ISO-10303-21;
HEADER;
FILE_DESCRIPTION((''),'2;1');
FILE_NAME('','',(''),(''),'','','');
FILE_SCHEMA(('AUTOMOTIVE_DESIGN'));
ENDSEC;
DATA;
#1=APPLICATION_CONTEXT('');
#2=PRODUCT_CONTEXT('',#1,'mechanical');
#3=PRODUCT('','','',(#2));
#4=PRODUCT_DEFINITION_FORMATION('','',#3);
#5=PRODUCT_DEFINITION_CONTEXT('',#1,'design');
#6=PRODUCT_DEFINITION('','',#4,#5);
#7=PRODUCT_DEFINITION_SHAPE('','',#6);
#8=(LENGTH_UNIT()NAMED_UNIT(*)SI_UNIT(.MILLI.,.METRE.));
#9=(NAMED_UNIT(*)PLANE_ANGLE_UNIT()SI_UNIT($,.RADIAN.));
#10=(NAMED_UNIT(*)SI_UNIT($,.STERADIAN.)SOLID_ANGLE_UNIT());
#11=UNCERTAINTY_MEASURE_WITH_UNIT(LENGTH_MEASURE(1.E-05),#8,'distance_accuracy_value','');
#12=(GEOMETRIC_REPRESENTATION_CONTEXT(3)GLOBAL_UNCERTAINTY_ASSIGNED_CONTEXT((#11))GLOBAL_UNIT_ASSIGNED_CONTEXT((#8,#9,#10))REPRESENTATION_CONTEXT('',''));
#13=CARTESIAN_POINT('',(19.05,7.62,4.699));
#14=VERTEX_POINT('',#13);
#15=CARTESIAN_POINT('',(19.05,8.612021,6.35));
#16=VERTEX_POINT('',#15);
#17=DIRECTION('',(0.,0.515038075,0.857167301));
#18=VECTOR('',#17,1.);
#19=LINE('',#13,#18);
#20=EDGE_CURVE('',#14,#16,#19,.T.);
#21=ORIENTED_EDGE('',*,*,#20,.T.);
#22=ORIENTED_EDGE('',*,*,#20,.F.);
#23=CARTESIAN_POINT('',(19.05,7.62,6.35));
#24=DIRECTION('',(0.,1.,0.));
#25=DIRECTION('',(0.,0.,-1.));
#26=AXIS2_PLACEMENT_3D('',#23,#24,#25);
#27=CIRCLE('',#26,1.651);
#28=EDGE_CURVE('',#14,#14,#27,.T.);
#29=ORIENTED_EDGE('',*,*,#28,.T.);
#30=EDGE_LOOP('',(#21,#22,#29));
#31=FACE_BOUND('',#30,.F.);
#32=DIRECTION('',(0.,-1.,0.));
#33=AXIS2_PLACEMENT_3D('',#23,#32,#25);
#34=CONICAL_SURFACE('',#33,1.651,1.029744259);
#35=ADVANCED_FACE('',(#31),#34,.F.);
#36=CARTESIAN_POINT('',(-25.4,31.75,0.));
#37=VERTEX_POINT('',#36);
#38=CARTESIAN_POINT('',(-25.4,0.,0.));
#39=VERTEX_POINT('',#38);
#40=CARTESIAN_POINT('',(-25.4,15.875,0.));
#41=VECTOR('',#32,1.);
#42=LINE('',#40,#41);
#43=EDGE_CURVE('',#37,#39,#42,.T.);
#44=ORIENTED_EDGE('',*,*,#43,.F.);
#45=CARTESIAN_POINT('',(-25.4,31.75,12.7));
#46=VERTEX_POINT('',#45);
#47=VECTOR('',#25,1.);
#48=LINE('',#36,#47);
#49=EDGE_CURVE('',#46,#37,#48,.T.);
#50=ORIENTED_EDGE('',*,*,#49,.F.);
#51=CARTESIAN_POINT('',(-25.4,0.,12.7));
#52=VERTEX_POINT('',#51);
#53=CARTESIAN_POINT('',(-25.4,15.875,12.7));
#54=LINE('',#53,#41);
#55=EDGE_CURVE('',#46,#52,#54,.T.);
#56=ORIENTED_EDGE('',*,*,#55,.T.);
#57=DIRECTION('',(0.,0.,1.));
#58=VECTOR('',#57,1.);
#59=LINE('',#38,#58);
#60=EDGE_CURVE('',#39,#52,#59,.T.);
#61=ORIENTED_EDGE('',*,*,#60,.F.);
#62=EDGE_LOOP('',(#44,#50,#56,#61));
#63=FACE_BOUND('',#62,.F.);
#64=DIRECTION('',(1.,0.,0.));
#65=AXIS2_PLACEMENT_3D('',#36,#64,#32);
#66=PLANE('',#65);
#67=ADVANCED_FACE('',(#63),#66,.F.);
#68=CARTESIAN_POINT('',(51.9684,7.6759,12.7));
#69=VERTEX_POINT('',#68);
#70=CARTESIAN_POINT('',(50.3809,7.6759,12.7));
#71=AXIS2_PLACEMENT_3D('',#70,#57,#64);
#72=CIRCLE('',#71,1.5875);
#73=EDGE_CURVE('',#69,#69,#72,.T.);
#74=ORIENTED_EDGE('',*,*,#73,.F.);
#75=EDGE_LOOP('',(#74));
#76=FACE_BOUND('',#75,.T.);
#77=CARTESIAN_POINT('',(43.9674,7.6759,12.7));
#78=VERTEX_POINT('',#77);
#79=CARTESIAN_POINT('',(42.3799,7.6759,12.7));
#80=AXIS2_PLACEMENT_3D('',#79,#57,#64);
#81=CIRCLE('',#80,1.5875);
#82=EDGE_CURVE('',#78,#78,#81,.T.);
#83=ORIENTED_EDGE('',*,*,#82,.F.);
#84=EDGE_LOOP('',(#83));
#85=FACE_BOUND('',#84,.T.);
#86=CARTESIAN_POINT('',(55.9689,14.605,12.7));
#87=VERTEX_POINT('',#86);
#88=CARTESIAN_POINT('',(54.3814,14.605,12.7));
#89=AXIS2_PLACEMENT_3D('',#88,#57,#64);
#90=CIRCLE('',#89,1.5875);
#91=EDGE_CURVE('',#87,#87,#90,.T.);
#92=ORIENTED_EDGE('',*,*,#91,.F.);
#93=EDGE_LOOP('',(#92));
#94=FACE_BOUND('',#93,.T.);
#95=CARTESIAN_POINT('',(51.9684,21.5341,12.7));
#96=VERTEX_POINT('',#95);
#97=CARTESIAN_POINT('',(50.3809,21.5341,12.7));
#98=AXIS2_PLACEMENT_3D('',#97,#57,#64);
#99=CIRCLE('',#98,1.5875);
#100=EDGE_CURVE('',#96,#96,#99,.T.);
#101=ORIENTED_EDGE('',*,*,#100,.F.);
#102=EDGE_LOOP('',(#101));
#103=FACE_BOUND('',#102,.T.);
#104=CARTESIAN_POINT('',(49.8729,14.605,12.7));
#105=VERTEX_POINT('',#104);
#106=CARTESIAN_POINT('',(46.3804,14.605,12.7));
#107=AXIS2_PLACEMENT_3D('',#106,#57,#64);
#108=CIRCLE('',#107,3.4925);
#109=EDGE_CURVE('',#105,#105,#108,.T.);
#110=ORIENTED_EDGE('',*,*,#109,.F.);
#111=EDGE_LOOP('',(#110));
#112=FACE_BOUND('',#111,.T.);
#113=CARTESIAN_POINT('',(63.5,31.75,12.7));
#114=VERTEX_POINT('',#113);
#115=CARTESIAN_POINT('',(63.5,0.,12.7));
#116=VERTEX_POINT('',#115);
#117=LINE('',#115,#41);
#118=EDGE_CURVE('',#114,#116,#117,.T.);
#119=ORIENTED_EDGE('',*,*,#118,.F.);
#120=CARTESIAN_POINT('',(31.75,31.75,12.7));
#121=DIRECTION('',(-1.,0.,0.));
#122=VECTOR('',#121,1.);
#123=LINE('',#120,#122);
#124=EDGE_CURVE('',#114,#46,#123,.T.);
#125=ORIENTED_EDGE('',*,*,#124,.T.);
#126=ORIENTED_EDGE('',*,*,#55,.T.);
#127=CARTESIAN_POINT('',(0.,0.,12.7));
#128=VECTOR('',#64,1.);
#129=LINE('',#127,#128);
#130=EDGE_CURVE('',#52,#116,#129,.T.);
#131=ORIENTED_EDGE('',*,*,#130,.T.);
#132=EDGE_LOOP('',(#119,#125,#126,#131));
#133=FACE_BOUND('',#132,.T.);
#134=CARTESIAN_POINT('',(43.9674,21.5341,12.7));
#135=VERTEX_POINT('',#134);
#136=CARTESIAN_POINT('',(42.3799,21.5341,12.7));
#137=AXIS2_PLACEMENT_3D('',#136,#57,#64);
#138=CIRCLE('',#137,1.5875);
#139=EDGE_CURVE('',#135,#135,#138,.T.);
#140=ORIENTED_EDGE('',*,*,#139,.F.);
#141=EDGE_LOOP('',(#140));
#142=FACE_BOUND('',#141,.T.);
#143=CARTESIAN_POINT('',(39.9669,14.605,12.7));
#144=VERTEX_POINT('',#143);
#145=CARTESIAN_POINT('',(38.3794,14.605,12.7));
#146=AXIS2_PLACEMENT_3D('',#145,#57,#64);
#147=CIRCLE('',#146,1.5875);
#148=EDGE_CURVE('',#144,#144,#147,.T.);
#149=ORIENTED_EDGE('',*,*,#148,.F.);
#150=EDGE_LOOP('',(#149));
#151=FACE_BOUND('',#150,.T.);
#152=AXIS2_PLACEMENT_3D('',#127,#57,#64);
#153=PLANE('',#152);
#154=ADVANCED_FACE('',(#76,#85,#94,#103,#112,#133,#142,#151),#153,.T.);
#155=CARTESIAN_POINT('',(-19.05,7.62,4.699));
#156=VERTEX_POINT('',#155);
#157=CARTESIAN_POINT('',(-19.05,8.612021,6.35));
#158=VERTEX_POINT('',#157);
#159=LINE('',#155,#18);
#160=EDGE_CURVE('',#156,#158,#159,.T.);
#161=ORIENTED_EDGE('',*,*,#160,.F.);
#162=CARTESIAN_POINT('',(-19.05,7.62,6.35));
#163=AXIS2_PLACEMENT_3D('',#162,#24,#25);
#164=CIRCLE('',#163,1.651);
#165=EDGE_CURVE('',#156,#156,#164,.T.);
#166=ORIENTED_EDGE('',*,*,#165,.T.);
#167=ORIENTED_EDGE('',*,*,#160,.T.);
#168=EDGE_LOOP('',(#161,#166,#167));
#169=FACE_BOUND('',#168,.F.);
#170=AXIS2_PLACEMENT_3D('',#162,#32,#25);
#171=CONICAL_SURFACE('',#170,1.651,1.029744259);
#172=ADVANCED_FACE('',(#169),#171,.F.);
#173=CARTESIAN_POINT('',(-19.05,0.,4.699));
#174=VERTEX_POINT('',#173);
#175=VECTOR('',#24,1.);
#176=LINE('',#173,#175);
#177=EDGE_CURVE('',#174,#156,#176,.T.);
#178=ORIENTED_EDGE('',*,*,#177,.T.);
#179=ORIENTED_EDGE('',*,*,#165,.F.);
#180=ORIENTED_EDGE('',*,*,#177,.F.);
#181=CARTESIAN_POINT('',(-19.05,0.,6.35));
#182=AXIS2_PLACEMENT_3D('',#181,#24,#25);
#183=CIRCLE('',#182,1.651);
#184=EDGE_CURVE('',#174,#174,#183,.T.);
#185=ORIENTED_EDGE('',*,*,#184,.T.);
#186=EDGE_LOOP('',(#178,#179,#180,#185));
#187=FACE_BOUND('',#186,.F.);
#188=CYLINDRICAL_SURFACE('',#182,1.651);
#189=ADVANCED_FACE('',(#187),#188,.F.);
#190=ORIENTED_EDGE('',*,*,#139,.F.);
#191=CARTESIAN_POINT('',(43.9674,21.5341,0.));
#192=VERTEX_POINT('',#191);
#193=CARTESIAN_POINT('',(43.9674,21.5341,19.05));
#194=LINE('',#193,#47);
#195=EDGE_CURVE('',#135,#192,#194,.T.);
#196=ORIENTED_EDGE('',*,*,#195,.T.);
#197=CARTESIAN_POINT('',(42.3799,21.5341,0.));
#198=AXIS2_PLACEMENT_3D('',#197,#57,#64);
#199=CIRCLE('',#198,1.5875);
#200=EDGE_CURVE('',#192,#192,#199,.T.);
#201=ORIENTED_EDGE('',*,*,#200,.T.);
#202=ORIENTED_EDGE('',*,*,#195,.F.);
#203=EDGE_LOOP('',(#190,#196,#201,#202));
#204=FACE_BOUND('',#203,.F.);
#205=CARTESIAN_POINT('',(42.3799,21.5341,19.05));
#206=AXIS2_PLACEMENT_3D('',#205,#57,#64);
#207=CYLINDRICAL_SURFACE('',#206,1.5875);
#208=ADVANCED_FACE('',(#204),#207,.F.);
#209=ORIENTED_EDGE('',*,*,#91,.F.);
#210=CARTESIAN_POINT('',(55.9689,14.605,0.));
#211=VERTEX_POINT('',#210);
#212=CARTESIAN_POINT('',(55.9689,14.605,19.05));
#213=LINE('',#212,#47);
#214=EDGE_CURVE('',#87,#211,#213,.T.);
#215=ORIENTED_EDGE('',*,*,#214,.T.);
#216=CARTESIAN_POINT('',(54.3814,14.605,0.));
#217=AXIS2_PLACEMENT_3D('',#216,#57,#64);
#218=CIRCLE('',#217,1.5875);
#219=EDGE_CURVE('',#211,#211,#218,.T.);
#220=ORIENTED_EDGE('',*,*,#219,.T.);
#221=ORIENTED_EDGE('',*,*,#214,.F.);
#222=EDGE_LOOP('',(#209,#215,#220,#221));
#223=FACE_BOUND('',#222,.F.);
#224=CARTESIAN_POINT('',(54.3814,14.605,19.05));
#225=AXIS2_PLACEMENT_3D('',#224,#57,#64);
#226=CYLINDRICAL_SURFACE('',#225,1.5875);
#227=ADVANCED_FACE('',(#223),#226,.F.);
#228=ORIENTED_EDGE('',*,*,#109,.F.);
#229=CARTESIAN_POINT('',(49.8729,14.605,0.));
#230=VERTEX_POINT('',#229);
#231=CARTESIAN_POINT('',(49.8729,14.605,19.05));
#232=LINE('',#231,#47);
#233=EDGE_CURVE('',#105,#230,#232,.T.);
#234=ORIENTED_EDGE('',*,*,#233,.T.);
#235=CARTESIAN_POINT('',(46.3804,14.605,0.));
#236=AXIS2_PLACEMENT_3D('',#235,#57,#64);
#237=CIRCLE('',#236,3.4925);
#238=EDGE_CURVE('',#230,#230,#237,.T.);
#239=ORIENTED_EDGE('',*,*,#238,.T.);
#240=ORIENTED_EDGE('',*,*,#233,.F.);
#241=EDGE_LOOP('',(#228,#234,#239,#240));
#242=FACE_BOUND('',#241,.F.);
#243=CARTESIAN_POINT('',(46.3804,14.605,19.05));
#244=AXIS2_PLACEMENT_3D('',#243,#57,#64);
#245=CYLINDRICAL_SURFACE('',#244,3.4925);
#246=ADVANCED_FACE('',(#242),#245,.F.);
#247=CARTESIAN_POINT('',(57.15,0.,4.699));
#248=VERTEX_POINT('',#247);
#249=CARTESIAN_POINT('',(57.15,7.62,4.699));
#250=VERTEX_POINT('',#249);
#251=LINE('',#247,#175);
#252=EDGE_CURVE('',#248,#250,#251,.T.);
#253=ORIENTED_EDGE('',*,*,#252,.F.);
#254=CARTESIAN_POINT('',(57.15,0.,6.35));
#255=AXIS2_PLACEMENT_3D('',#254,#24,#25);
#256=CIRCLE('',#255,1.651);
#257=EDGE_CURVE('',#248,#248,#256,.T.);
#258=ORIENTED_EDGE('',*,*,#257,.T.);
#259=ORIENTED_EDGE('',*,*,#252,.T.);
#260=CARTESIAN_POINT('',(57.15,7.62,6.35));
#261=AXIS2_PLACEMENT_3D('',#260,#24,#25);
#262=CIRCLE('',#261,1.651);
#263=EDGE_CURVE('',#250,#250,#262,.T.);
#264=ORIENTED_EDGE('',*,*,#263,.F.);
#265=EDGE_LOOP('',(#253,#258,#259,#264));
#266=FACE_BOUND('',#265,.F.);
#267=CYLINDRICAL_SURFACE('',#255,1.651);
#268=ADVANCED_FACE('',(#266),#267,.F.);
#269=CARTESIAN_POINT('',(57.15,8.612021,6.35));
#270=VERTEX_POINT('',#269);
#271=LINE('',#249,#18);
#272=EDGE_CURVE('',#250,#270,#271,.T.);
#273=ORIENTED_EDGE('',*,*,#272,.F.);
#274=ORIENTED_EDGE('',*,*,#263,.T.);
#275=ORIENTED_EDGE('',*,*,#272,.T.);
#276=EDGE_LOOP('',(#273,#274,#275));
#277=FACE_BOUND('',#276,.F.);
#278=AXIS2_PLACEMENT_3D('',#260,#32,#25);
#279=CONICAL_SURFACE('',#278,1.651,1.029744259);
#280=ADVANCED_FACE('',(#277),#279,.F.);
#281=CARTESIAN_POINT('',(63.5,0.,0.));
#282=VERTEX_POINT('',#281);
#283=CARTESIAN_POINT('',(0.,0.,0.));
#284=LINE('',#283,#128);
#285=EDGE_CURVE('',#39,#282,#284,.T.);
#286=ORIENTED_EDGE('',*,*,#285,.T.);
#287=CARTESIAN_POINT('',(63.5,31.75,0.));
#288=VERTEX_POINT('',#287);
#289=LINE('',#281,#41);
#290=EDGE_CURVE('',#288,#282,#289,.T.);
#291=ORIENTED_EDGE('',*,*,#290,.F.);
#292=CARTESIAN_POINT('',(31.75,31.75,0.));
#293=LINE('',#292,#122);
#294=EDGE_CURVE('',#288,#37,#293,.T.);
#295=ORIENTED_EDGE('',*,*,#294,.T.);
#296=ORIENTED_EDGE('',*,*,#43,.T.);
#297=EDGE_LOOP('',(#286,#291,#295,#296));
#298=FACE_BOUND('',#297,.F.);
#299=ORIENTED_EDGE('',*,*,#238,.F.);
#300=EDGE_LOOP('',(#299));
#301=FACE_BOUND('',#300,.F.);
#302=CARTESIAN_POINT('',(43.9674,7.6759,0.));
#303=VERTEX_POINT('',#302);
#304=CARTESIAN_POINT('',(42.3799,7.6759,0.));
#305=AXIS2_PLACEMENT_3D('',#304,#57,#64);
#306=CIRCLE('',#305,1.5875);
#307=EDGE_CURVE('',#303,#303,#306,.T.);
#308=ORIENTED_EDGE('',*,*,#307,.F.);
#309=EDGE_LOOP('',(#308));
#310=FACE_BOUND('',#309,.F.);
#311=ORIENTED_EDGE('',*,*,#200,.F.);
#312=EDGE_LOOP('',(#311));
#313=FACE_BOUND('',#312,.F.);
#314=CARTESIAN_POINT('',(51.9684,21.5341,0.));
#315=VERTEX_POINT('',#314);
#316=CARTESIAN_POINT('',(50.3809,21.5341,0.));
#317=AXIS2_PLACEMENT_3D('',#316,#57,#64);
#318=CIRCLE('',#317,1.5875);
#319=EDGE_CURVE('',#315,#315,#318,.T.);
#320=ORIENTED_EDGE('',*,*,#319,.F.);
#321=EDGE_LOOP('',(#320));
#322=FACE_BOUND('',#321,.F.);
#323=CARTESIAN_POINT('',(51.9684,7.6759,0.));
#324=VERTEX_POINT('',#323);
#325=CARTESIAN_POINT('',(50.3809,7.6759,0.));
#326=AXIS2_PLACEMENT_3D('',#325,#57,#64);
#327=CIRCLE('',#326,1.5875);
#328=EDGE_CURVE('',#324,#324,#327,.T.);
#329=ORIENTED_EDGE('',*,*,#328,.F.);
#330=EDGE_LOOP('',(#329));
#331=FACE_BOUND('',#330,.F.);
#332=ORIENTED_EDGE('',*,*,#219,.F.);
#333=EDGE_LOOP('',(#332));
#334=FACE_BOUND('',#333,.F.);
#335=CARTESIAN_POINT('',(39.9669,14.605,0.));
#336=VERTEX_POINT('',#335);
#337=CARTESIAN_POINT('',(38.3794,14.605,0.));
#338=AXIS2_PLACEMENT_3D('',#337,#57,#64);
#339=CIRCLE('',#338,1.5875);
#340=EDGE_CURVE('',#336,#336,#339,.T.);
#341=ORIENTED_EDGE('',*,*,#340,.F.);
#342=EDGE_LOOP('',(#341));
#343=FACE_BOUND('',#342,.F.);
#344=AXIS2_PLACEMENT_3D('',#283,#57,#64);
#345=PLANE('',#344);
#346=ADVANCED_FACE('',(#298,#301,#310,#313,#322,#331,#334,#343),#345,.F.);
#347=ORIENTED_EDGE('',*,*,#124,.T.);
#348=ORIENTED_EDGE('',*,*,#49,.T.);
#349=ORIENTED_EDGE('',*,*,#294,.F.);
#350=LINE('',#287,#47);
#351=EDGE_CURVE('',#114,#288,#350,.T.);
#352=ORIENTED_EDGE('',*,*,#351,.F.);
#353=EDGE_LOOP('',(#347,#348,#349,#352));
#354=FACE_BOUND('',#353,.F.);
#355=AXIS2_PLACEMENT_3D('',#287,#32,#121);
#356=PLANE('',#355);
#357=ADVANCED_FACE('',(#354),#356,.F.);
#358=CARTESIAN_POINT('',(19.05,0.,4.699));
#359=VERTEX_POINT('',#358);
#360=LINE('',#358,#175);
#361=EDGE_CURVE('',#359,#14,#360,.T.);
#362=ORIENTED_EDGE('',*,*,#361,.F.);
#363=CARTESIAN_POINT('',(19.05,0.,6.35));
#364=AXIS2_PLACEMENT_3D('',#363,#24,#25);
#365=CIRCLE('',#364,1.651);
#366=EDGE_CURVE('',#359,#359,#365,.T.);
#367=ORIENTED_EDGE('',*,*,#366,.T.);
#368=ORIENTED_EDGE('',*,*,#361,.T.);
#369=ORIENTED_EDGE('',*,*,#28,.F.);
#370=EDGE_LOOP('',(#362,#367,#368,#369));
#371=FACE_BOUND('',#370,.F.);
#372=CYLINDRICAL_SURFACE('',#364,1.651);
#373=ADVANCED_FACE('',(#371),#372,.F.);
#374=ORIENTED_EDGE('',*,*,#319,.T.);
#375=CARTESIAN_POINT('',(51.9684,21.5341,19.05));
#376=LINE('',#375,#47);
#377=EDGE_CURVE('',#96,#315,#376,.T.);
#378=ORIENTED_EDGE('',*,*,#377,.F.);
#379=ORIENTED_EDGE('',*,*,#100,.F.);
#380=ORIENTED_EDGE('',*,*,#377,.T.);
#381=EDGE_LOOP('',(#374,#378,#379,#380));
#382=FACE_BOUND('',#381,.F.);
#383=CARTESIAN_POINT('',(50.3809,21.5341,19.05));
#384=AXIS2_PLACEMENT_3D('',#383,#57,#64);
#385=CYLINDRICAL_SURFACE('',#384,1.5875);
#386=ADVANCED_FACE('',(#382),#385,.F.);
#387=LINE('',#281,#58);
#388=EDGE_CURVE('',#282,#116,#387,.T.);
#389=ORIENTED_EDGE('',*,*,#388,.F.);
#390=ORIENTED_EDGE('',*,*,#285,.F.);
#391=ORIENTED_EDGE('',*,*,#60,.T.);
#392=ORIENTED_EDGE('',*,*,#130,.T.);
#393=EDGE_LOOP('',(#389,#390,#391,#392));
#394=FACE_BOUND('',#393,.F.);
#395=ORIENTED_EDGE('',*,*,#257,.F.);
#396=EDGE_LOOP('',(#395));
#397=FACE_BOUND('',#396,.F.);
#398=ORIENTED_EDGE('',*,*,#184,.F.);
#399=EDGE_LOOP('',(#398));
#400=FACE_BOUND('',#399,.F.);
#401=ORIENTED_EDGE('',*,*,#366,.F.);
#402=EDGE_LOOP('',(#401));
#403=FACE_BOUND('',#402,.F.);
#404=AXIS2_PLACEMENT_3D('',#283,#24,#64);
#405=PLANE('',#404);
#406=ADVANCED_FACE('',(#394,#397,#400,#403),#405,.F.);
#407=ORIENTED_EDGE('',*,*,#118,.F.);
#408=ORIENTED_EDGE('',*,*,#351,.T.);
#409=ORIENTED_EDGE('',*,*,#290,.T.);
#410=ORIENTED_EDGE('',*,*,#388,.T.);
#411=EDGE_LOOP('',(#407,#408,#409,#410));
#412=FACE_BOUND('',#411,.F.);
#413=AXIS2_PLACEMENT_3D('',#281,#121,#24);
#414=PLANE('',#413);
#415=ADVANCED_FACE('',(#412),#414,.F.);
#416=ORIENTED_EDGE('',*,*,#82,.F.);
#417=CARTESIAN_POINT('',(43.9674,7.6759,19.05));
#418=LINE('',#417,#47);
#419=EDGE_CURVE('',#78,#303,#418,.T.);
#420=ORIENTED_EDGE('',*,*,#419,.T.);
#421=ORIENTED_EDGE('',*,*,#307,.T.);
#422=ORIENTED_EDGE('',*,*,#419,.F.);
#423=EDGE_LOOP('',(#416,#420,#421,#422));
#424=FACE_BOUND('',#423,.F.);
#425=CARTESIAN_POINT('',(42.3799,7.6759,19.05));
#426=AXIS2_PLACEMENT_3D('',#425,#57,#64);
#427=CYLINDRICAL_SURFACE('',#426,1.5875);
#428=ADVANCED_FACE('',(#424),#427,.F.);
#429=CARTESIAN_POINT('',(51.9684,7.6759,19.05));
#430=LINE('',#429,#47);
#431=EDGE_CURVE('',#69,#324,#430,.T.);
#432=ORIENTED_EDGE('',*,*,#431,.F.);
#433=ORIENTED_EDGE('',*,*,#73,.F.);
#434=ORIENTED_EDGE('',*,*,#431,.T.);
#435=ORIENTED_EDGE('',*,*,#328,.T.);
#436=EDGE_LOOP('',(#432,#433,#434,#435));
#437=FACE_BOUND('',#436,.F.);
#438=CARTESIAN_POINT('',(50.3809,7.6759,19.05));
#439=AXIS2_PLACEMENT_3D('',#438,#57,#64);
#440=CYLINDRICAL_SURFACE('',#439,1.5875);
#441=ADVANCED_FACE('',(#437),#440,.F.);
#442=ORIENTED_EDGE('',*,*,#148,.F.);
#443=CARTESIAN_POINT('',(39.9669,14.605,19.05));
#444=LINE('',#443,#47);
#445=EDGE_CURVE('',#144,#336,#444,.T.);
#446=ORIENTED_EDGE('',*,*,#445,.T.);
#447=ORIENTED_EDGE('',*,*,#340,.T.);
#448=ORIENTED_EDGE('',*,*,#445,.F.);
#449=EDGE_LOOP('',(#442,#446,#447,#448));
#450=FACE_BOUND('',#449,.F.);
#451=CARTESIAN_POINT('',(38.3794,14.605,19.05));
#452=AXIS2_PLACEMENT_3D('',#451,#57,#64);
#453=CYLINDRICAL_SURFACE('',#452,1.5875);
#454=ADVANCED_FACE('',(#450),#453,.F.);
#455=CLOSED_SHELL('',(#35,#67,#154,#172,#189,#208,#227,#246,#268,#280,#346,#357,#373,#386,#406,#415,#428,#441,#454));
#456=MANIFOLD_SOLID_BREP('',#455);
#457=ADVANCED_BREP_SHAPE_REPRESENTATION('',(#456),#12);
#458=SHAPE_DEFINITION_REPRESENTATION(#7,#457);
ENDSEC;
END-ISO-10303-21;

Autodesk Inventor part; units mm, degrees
ref_plane "YZ Plane" through (0, 0, 0) normal (1, 0, 0) x (0, 1, 0)
ref_plane "XZ Plane" through (0, 0, 0) normal (0, 1, 0) x (-1, 0, 0)
ref_plane "XY Plane" through (0, 0, 0) normal (0, 0, 1) x (1, 0, 0)
sketch "Sketch1" plane through (0, 0, 0) normal (0, 0, 1) x (1, 0, 0)
  line L0 (0, 0) -> (63.5, 0)
  line L1 (0, 0) -> (63.5, 0)
  line L2 (63.5, 0) -> (63.5, 31.75)
  line L3 (63.5, 31.75) -> (0, 31.75)
  line L4 (0, 31.75) -> (0, 0)
  dimension "d0" = 63.5
  dimension "d1" = 31.75
extrude "Extrusion1" add sketch "Sketch1" along normal blind 19.05
sketch "Sketch2" plane through (0, 0, 19.05) normal (0, 0, 1) x (1, 0, 0)
  line L0 (63.5, 0) -> (63.5, 31.75) projected
  line L1 (63.5, 7.8489) -> (80.6196, 7.8489) construction
  line L2 (46.3804, 0) -> (46.3804, 14.605)
  circle A0 centre (46.3804, 14.605) radius 3.4925
  circle A1 centre (46.3804, 14.605) radius 8.001
  circle A2 centre (54.3814, 14.605) radius 1.5875
  circle A3 centre (50.3809, 21.5341) radius 1.5875
  circle A4 centre (46.3804, 14.605) radius 8.001
  circle A5 centre (42.3799, 21.5341) radius 1.5875
  circle A6 centre (46.3804, 14.605) radius 8.001
  circle A7 centre (38.3794, 14.605) radius 1.5875
  circle A8 centre (46.3804, 14.605) radius 8.001
  circle A9 centre (42.3799, 7.6759) radius 1.5875
  circle A10 centre (46.3804, 14.605) radius 8.001
  circle A11 centre (50.3809, 7.6759) radius 1.5875
  circle A12 centre (46.3804, 14.605) radius 8.001
  point P0 (0, 0)
  dimension "d9" = 16.002
  dimension "d6" = 14.605
  dimension "d7" = 6.985
  dimension "d17" = 3.175
  dimension "d20" = 360
  dimension "d61" = 17.1196
extrude "Extrusion2" cut sketch "Sketch2" against normal blind 19.05 contours A0 | A1 A2 | A1 A2 | A3 A1 | A1 A3 | A11 A1 | A1 A11 | A5 A1 | A1 A5 | A9 A1 | A1 A9 | A7 A1 | A1 A7
thicken "Thicken1" operation add thickness 25.4 both sides no extend neighbours yes toward (-1, 0, 0) faces at (0, 21.1667, 12.7)
thicken "Thicken2" operation add thickness 3.175 both sides no extend neighbours yes toward (0, 0, -1) faces at (-4.6694, 15.4517, 19.05)
thicken "Thicken3" operation add thickness 3.175 both sides no extend neighbours yes toward (0, 0, -1) faces at (-4.6694, 15.4517, 15.875)
sketch "Sketch5" plane through (-25.4, 0, 0) normal (0, -1, 0) x (1, 0, 0)
  line L0 (0, 0) -> (0, 12.7) projected
  line L1 (88.9, 0) -> (88.9, 12.7) projected
  line L2 (0, 0) -> (88.9, 0) projected
  point P0 (25.4, 0)
  point P1 (6.35, 6.35)
  point P2 (44.45, 6.35)
  point P3 (82.55, 6.35)
  dimension "d57" = 6.35
  dimension "d58" = 44.45
  dimension "d59" = 88.9
  dimension "d60" = 6.35
hole "Hole1" at (-19.05, 0, 6.35) at (19.05, 0, 6.35) at (57.15, 0, 6.35) direction (0, 1, 0) diameter 3.302 depth 7.62 tip angle 118 thread size "8-32 UNC" class "2B" standard "ANSI Unified Screw Threads"
equation "\"d58\" = 0.5 * d59"
properties part number "MotorHolderA"
